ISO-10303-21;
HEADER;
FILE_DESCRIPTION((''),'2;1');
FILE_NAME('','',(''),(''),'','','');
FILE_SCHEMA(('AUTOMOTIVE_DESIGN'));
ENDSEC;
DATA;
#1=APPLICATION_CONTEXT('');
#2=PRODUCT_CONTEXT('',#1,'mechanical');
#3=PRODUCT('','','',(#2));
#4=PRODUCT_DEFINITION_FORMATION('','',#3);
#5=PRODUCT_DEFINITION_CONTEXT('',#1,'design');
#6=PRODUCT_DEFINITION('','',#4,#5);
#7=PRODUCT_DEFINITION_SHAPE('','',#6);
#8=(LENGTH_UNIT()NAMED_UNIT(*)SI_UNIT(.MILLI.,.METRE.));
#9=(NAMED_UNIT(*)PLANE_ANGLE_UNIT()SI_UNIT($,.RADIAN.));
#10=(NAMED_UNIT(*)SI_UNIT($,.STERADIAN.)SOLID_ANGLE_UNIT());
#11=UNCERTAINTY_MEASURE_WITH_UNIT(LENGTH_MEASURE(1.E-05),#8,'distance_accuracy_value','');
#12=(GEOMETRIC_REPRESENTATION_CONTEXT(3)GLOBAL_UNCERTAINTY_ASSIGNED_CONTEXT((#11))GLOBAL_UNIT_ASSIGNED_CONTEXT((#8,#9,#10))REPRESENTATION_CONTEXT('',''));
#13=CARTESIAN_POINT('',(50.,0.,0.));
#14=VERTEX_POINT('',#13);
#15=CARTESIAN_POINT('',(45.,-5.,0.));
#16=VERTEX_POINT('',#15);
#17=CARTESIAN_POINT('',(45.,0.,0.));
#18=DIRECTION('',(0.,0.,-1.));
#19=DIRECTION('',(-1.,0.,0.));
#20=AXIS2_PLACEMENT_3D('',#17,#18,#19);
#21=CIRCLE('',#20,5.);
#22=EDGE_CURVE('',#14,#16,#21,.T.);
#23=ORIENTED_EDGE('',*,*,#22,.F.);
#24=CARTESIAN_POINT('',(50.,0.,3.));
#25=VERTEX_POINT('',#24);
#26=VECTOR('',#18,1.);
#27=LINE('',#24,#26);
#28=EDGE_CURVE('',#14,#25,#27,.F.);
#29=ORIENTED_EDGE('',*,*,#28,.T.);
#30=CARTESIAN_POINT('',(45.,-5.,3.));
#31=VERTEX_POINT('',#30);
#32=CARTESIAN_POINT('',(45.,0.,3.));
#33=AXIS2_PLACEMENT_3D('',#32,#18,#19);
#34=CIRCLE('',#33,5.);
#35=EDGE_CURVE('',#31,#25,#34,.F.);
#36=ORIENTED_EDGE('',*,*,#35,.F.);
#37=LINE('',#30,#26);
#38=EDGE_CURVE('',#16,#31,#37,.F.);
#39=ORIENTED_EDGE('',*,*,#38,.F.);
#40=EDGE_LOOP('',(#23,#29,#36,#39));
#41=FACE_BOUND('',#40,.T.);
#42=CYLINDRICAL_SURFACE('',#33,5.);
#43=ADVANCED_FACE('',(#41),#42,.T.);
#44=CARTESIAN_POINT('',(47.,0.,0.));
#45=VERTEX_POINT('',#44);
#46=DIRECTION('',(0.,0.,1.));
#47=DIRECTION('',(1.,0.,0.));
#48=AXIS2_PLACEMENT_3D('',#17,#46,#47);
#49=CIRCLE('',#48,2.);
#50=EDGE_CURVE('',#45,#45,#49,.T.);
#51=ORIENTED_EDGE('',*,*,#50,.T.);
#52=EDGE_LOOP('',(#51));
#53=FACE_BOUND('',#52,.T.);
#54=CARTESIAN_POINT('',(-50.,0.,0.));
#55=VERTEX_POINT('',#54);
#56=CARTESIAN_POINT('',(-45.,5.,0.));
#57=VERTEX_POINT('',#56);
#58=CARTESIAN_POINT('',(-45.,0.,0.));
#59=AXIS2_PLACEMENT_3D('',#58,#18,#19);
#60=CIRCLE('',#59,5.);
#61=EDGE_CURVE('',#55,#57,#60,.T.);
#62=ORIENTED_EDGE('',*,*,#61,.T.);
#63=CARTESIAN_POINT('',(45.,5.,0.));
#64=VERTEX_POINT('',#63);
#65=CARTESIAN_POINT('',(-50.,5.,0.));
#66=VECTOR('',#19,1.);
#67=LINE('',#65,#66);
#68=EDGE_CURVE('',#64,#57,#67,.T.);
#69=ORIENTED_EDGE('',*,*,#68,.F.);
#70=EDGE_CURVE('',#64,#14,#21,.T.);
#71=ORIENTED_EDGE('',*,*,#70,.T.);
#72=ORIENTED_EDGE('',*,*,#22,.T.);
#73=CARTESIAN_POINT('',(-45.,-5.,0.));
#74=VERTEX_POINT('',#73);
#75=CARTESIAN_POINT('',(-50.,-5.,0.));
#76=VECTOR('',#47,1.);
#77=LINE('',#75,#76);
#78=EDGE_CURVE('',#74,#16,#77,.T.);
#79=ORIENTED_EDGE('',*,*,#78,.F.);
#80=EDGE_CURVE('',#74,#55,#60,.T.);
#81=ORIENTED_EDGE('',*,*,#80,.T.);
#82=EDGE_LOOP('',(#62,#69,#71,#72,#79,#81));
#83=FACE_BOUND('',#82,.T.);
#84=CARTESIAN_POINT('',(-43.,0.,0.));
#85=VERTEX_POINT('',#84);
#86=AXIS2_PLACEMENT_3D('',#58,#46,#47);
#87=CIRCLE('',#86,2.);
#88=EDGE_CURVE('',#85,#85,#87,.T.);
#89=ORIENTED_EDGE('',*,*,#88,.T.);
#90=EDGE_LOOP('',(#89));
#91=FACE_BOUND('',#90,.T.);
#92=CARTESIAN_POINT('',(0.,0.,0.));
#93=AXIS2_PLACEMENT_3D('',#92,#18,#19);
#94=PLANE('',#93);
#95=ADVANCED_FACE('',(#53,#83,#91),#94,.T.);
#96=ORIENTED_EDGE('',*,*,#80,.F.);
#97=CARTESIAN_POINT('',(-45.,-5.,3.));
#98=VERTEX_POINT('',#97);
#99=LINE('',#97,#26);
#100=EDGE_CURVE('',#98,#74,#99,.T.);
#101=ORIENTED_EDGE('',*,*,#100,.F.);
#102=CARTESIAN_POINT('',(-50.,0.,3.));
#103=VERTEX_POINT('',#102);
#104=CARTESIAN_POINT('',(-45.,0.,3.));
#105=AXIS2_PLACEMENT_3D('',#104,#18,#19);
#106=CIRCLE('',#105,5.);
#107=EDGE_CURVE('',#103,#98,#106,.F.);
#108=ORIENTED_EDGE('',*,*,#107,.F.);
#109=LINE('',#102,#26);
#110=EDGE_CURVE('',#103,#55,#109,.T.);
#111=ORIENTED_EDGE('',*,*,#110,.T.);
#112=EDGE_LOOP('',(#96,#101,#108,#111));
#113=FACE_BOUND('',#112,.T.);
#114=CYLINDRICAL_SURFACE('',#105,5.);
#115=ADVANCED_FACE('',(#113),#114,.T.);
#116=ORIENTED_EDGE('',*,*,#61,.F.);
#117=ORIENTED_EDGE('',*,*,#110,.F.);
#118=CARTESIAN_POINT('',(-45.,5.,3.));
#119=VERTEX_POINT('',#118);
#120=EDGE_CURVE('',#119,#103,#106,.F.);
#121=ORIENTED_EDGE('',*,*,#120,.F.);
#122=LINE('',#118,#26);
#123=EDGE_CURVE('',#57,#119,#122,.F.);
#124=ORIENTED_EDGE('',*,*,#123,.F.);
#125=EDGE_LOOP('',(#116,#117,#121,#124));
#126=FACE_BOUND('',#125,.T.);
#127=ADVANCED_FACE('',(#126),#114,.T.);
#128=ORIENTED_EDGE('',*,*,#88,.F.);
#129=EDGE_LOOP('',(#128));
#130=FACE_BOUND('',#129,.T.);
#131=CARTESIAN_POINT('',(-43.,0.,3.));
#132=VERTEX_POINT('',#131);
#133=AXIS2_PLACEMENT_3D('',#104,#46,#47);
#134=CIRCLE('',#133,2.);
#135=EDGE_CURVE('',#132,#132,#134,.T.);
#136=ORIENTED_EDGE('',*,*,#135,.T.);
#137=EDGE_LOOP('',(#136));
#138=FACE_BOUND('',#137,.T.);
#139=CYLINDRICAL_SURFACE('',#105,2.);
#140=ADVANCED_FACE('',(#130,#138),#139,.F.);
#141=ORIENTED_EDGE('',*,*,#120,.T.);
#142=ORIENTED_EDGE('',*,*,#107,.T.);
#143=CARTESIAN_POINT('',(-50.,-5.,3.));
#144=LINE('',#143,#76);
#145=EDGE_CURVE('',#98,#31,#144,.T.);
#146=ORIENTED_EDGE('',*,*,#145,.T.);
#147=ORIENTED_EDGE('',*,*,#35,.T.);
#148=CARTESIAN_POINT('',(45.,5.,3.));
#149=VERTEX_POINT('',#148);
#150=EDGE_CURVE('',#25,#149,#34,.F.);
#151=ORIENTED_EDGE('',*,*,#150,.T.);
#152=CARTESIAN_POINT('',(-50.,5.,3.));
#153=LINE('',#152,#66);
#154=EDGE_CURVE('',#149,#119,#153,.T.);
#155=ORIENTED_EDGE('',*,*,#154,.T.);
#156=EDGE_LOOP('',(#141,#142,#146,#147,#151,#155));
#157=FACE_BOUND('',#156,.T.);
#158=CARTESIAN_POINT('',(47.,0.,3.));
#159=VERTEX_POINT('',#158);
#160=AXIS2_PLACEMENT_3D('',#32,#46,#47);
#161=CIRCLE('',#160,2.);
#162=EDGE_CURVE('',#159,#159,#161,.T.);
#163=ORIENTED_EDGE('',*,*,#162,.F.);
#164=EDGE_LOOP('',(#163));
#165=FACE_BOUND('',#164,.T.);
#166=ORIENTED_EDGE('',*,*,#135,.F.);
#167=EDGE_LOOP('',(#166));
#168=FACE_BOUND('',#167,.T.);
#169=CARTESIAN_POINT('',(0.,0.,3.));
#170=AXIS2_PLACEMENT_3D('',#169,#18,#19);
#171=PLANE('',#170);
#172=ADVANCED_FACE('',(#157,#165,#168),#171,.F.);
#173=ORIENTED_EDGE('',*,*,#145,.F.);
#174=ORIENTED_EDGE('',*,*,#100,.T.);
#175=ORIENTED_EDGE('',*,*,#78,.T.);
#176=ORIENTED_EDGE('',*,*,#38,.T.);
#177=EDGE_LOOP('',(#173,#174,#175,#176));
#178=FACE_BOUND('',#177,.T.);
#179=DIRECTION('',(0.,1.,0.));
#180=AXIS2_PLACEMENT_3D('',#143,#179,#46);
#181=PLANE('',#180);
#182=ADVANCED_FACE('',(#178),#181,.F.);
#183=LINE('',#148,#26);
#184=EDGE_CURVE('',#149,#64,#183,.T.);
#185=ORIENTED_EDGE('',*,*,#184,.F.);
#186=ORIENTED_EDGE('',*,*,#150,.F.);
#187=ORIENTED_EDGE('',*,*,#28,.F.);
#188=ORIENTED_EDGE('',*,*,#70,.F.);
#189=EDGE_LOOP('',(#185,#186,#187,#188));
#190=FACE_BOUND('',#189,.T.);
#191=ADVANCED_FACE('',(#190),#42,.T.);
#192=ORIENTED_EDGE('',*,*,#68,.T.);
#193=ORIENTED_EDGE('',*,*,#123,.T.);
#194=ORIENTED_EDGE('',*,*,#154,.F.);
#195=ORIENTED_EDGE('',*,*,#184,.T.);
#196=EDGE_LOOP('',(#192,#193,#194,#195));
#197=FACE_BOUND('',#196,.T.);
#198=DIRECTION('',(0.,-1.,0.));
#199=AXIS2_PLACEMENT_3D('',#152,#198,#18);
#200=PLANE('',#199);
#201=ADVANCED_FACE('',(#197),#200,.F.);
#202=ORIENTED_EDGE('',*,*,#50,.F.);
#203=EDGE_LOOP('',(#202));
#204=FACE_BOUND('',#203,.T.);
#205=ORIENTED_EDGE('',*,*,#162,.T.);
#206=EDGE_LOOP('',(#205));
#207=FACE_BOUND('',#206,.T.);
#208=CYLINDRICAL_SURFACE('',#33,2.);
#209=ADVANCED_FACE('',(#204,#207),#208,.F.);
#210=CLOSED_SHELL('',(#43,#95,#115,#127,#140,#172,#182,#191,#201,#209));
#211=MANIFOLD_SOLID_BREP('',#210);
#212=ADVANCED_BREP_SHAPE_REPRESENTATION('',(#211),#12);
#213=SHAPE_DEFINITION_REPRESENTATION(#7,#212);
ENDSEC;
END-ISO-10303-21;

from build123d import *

# Parameters (mm, degrees)
SKETCH_1_W      = 100
SKETCH_1_H      = 10
SKETCH_1_R      = 2
EXTRUDE_1_DEPTH = 3
FILLET_1_R      = 5


with BuildPart() as part:
    # 草图1 → 凸台-拉伸1 (new body)
    with BuildSketch(Plane.XY):
        Rectangle(SKETCH_1_W, SKETCH_1_H)
        with Locations((-45, 0)):
            Circle(SKETCH_1_R, mode=Mode.SUBTRACT)
        with Locations((45, 0)):
            Circle(SKETCH_1_R, mode=Mode.SUBTRACT)
    extrude(amount=EXTRUDE_1_DEPTH)

    # 圆角1
    fillet_1_edges = [part.edges().sort_by_distance(p)[0] for p in [
        (50, -5, 1.5),
        (50, 5, 1.5),
        (-50, -5, 1.5),
        (-50, 5, 1.5),
    ]]
    fillet(fillet_1_edges, radius=FILLET_1_R - 0.0001)  # a hair under: the kernel refuses the full size


solid = part.part
